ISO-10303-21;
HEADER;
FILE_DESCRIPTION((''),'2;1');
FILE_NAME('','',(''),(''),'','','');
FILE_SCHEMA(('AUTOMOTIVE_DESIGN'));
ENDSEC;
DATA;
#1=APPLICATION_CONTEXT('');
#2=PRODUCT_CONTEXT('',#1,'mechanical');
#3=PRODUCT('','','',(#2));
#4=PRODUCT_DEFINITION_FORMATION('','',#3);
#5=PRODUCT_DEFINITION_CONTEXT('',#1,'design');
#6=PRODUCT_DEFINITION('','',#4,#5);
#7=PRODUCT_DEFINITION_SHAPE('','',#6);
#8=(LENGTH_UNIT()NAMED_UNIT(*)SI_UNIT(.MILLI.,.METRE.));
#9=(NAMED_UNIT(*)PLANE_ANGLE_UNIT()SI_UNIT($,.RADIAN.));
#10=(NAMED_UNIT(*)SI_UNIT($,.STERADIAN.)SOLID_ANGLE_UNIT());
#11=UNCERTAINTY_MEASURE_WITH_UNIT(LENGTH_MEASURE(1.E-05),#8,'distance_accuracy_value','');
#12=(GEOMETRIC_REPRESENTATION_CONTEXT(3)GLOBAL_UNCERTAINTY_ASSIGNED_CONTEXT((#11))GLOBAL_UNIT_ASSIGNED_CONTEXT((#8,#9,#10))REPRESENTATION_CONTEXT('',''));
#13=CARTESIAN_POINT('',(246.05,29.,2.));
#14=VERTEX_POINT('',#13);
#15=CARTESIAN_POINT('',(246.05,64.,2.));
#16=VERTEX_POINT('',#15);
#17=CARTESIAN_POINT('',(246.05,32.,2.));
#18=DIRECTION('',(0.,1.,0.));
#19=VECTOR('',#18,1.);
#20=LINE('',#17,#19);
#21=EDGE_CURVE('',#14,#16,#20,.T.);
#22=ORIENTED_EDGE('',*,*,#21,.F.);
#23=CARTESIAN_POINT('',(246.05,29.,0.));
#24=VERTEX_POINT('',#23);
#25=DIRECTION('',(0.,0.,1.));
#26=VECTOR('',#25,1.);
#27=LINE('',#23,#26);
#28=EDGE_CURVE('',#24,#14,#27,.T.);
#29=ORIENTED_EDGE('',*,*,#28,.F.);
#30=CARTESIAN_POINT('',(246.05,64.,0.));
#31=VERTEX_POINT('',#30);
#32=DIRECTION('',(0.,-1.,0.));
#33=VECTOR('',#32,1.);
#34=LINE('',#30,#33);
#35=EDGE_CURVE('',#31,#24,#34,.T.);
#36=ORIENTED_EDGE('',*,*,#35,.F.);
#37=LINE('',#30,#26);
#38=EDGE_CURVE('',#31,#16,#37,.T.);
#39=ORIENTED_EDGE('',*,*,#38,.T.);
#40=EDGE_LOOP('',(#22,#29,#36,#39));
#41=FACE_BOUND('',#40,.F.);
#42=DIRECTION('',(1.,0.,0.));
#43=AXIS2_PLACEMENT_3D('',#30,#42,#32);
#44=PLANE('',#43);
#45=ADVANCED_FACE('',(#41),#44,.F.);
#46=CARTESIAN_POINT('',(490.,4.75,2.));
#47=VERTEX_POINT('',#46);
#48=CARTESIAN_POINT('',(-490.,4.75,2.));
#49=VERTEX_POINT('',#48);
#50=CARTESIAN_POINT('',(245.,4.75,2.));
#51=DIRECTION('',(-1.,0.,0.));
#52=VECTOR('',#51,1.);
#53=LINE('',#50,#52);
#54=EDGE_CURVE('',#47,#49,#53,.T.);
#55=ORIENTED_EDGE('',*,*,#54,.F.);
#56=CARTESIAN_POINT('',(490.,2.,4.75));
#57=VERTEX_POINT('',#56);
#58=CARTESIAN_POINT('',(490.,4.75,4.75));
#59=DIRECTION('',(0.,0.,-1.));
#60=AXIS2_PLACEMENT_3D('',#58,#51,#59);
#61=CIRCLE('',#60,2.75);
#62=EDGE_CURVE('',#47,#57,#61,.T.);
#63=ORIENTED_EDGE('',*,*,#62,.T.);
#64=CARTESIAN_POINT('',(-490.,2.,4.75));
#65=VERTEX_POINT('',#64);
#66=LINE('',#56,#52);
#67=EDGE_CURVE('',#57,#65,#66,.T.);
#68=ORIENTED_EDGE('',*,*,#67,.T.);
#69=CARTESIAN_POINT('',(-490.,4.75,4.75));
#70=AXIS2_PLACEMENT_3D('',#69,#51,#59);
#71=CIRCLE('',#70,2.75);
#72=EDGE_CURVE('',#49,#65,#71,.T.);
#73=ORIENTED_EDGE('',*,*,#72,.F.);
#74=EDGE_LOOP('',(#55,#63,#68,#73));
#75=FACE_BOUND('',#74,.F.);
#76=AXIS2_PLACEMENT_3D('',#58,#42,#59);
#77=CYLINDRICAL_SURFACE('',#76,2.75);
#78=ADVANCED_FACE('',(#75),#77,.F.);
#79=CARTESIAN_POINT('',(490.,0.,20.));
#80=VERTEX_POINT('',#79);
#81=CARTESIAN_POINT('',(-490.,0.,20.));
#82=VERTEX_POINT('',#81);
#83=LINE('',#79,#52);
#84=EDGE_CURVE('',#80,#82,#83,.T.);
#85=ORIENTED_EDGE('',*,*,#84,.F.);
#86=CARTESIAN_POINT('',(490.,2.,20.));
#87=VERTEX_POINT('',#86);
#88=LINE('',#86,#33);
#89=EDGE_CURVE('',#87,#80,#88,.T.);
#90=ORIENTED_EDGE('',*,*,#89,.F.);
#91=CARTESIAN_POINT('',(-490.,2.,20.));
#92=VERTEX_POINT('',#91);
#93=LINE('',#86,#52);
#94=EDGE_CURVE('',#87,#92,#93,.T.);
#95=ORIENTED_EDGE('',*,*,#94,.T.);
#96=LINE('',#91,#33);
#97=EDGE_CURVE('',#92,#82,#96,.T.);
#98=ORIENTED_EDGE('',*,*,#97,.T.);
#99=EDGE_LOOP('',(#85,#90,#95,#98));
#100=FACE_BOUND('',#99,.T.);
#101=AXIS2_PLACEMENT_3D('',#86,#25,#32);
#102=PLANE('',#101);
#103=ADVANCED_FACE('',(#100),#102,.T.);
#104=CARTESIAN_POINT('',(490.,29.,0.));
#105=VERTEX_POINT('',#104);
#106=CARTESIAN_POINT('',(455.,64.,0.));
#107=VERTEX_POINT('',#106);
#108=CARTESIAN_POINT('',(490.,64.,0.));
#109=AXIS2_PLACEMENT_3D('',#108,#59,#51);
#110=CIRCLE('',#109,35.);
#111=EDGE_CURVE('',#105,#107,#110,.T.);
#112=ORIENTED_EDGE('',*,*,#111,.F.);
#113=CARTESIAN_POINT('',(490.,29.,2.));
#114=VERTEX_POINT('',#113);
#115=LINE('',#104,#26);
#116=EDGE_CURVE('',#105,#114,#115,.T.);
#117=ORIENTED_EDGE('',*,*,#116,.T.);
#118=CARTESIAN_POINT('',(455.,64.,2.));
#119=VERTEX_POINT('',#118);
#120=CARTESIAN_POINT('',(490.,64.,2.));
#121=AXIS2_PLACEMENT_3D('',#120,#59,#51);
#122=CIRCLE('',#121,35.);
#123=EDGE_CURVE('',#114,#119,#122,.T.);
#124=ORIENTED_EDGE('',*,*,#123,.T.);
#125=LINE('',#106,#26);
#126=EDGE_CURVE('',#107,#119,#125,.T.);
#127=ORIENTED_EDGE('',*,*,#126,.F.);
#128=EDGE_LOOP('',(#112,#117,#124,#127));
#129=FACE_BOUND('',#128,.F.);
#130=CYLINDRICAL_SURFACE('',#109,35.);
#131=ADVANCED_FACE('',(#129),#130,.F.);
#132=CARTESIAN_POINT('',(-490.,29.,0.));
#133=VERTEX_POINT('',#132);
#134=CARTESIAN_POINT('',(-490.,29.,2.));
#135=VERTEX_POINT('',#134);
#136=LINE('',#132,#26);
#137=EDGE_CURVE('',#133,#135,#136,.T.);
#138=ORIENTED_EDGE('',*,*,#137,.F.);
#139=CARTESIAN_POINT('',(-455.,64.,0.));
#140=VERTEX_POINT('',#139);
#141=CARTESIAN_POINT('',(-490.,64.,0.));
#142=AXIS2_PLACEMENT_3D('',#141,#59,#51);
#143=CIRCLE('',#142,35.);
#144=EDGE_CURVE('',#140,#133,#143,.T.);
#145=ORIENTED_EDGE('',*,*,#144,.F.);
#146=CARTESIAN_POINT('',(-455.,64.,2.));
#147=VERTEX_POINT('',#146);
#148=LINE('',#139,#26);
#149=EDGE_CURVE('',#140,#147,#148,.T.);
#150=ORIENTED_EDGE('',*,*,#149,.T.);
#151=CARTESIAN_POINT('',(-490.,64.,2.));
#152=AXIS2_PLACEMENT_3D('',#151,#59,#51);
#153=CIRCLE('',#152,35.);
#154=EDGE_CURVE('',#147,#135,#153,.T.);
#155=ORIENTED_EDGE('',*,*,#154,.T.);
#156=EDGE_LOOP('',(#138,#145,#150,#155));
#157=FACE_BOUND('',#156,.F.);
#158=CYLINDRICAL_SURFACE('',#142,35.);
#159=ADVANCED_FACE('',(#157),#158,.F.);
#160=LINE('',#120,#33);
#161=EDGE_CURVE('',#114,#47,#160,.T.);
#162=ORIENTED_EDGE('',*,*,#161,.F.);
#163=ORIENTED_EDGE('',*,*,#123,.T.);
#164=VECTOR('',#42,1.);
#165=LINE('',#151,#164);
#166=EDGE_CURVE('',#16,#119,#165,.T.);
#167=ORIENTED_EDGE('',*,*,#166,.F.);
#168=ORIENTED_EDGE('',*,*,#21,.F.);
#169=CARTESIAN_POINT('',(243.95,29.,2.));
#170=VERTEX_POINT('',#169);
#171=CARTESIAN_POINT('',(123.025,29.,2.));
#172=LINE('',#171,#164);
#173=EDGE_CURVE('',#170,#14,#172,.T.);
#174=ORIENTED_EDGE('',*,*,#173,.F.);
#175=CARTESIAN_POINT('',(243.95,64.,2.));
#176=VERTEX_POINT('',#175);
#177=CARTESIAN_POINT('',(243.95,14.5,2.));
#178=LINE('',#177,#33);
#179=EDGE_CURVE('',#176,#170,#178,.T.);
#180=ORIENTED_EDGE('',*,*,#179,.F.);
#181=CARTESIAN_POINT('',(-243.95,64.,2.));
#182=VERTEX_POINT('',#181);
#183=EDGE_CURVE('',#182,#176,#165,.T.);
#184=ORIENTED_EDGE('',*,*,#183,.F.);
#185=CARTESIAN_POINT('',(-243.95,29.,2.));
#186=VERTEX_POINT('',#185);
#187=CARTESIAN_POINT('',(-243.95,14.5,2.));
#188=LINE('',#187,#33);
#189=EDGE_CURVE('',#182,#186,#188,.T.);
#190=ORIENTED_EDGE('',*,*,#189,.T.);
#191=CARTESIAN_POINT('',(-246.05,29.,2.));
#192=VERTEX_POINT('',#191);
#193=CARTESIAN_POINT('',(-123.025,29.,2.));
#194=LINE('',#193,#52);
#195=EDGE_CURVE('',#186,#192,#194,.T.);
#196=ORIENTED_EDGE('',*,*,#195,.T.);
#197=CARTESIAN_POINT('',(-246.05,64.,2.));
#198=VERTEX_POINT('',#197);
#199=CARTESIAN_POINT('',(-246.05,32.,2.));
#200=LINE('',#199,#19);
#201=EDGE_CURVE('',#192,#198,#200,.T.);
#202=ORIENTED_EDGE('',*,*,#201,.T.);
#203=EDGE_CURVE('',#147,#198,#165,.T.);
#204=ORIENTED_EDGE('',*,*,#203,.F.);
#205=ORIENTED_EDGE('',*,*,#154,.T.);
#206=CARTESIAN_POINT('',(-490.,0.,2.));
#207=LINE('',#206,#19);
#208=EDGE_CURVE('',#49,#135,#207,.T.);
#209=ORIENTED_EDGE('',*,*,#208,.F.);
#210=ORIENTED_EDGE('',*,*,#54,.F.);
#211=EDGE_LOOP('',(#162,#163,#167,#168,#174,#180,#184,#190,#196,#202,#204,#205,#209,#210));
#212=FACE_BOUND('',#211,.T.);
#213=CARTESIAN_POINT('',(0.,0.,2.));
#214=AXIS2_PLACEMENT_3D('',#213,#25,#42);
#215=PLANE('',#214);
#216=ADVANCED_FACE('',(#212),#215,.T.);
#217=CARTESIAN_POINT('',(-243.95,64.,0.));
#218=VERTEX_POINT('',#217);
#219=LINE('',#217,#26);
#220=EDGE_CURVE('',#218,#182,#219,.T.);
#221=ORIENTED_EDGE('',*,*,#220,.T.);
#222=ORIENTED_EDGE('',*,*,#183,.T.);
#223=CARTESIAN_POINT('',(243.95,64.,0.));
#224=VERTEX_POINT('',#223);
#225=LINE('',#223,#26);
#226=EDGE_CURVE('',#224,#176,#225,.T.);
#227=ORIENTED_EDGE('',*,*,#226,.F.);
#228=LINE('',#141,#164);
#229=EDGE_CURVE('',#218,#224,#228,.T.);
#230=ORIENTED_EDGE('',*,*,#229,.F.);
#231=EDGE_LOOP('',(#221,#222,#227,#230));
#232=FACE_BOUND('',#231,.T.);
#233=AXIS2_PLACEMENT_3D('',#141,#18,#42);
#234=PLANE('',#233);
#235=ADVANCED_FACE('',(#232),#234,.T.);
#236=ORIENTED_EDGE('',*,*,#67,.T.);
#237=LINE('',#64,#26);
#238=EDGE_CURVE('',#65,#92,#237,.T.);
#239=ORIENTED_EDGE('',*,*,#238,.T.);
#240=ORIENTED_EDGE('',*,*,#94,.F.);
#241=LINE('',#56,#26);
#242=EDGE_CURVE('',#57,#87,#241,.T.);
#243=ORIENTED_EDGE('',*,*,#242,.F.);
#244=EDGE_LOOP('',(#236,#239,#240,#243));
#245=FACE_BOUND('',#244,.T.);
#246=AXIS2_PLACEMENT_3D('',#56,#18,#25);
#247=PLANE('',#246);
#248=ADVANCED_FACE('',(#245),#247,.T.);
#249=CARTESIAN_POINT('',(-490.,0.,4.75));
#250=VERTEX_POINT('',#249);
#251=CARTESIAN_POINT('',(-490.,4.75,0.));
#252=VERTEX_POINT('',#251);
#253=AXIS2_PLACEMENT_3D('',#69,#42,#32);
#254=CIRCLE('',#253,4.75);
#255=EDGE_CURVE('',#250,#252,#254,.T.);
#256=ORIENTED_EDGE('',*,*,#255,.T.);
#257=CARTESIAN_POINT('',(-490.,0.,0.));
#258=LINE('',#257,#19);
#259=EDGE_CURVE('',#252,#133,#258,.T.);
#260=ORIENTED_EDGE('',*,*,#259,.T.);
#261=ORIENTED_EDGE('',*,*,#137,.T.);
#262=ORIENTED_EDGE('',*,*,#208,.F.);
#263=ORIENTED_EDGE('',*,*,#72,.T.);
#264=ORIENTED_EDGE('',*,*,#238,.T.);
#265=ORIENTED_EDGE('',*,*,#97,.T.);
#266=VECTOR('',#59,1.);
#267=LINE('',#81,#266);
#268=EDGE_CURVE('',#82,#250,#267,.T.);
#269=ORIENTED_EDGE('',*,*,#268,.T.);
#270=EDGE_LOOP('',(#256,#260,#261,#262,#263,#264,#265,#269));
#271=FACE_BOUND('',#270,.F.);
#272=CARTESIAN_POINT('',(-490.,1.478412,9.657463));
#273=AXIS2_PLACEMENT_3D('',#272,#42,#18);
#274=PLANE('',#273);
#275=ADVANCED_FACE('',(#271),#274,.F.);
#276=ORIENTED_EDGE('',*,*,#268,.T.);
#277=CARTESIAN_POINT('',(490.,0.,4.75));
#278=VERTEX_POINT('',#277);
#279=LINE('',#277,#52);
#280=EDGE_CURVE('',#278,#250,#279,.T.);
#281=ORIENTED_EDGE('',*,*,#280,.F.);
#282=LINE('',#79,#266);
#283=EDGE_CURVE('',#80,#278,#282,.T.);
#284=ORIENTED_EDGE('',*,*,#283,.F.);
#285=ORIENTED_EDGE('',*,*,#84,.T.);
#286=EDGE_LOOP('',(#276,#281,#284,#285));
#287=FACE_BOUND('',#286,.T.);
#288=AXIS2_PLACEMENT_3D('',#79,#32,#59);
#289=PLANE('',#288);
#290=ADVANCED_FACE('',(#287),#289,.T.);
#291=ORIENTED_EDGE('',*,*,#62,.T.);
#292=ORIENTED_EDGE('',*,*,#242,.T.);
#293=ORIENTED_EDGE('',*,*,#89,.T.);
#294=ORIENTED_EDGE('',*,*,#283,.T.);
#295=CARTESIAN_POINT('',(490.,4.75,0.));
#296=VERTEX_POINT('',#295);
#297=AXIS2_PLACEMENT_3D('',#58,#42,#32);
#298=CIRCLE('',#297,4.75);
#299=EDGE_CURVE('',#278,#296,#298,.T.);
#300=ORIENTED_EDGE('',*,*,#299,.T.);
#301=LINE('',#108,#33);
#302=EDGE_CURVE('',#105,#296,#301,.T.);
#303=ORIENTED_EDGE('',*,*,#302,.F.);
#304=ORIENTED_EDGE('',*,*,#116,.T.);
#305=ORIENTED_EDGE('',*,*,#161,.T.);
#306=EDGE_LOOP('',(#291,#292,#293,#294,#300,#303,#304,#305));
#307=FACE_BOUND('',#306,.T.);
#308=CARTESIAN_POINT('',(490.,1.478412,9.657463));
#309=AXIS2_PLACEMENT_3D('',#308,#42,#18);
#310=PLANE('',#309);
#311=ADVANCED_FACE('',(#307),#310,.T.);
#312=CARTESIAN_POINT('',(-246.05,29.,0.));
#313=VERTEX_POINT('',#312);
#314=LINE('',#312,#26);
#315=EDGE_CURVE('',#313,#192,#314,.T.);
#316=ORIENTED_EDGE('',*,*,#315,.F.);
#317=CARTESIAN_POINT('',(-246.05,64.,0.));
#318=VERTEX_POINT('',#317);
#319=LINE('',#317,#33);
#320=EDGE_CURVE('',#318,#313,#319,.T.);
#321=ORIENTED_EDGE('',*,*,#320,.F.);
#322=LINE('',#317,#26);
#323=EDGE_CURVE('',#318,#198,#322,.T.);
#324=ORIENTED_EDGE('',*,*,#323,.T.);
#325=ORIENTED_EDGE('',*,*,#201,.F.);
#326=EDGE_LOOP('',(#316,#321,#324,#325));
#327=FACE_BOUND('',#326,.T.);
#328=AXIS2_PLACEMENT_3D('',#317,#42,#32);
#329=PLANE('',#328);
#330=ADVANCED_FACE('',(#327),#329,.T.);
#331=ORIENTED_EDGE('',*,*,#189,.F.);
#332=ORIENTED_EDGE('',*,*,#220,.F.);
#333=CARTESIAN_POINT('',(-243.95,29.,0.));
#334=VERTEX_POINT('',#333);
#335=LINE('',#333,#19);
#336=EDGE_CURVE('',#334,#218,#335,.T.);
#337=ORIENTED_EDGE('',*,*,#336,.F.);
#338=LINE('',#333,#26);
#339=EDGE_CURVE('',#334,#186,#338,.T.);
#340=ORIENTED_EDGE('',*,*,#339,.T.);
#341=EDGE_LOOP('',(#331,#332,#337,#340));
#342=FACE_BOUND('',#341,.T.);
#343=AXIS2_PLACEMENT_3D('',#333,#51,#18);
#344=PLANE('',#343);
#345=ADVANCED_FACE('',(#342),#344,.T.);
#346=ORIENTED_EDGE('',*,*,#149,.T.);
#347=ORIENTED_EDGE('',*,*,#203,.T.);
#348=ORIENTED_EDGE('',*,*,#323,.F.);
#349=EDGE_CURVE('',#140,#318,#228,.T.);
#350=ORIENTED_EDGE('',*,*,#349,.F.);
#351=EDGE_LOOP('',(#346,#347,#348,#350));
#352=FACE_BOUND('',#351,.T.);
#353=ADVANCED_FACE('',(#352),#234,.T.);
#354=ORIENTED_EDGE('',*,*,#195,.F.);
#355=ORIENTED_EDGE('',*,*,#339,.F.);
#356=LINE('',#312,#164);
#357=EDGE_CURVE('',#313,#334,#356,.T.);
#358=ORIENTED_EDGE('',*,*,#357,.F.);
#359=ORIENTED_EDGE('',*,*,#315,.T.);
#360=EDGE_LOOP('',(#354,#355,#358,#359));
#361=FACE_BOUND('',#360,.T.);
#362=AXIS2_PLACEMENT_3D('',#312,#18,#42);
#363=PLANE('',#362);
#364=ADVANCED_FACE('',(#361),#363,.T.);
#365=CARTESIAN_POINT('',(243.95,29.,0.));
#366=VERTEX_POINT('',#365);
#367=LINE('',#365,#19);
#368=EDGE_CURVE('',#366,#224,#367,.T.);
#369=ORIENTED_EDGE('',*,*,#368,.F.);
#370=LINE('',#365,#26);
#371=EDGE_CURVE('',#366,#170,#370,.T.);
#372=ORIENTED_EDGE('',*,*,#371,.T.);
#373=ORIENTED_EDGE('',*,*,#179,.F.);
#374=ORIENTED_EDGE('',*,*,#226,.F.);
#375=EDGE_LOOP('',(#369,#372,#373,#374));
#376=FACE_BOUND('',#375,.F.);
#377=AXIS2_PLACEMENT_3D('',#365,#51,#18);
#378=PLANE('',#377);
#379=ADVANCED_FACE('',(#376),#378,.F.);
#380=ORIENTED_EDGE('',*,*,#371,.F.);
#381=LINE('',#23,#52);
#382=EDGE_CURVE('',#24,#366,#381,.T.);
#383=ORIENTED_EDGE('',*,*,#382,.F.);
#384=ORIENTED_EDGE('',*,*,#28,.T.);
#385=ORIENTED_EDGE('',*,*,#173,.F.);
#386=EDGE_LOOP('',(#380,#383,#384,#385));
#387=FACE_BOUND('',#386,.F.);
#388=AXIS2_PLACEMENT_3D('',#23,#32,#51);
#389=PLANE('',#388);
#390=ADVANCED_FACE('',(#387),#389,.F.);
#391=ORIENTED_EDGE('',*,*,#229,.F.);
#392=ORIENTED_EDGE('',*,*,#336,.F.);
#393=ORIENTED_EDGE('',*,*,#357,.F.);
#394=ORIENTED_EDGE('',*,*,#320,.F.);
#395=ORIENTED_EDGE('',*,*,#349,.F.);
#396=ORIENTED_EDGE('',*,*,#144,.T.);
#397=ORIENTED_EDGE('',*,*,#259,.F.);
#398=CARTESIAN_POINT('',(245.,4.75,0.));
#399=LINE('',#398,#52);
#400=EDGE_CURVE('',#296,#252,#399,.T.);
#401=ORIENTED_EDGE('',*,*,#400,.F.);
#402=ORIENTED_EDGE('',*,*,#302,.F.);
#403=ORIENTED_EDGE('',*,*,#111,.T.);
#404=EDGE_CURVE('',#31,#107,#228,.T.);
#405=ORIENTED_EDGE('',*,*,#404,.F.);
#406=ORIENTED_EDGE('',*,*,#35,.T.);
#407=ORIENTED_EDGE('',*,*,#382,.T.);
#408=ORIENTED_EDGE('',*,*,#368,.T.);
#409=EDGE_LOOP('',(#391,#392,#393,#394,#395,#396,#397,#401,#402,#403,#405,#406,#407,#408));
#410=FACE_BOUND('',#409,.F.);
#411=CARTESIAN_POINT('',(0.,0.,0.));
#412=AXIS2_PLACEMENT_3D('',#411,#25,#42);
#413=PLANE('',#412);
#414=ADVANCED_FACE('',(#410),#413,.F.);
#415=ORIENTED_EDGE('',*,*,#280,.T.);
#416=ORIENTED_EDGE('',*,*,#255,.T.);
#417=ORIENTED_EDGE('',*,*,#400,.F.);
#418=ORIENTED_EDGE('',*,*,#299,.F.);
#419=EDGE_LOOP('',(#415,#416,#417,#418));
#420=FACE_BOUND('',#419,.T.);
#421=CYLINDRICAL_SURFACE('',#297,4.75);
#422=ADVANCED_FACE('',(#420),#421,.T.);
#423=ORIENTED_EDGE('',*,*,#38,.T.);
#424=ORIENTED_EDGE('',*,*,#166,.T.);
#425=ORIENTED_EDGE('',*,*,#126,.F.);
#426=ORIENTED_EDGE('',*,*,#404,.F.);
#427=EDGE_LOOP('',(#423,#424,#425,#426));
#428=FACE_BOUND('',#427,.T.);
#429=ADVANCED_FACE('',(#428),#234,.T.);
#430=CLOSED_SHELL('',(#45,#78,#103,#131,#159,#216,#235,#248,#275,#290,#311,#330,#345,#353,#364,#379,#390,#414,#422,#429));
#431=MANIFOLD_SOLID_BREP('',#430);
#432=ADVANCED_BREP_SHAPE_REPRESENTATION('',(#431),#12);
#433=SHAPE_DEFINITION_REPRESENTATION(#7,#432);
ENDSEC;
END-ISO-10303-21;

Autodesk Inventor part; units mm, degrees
ref_plane "YZ Plane" through (0, 0, 0) normal (1, 0, 0) x (0, 1, 0)
ref_plane "XZ Plane" through (0, 0, 0) normal (0, 1, 0) x (-1, 0, 0)
ref_plane "XY Plane" through (0, 0, 0) normal (0, 0, 1) x (1, 0, 0)
sketch "Sketch1" plane through (0, 0, 0) normal (0, 0, 1) x (1, 0, 0)
  line L0 (-490, 64) -> (490, 64)
  line L1 (490, 64) -> (490, 0)
  line L2 (490, 0) -> (-490, 0)
  line L3 (-490, 0) -> (-490, 64)
  point P0 (0, 0)
  point P1 (0, 0)
  dimension "d0" = 980
  dimension "d1" = 64
extrude "Plate1" add sketch "Sketch1" along normal blind 2
sketch "Sketch2" plane through (490, 2, 0) normal (0, -1, 0) x (1, 0, 0)
  line L0 (-980, 0) -> (0, 0)
  line L1 (0, 0) -> (0, 20)
  line L2 (0, 20) -> (-980, 20)
  line L3 (-980, 20) -> (-980, 0)
edge flange "Flange1" height 20 angle 90 thickness 2 bend radius 2.75 thickness toward (0, -1, 0) relief round relief width 2 relief depth 1 edges at (0, 0, 2) wall of the first edge with corners at (-490, 2, 0) (490, 2, 0) (490, 2, 20) (-490, 2, 20)
bend "Bend1"
corner "Corner1"
sketch "Sketch5" plane through (0, 0, 0) normal (0, 0, -1) x (-1, 0, 0)
  line L0 (490, 64) -> (-490, 64) projected
  line L1 (490, 0) -> (-490, 0) projected
  circle A0 centre (0, 64) radius 35
  line L2 (243.95, 64) -> (246.05, 64)
  line L3 (246.05, 64) -> (246.05, 29)
  line L4 (246.05, 29) -> (243.95, 29)
  line L5 (243.95, 29) -> (243.95, 64)
  line L6 (-243.95, 64) -> (-246.05, 64)
  line L7 (-246.05, 64) -> (-246.05, 29)
  line L8 (-246.05, 29) -> (-243.95, 29)
  line L9 (-243.95, 29) -> (-243.95, 64)
  line L10 (0, 64) -> (0, 0) construction
  line L11 (-490, 0) -> (-490, 64)
  line L12 (490, 0) -> (490, 64)
  circle A1 centre (-490, 64) radius 35
  circle A2 centre (490, 64) radius 35
  point P0 (0, 0)
  point P1 (245, 29)
  point P2 (-245, 29)
  point P3 (246.05, 64)
  point P4 (-35, 64)
  point P5 (35, 64)
  point P6 (-246.05, 64)
  point P7 (455, 64)
  point P8 (490, 29)
  point P9 (-490, 29)
  point P10 (-455, 64)
  dimension "d45" = 70
  dimension "d48" = 2.1
  dimension "d49" = 490
  dimension "d51" = 29
  dimension "d52" = 35
extrude "Extrusion1" cut sketch "Sketch5" against normal through all contours L3 L4 L5 L0 | L0 L12 A2 | L9 L8 L7 L0 | L11 L0 A1 picked at (487.4039, 40.9592) picked at (-466.9592, 61.4039)
sketch "Sketch9" plane through (0, 0, 2) normal (0, 0, 1) x (1, 0, 0)
  line L0 (467.0539, 27.7998) -> (467.0539, 15.7998) construction
  line L1 (467.0539, 15.7998) -> (267.0539, 15.7998) construction
  line L2 (267.0539, 15.7998) -> (267.0539, 27.7998) construction
  line L3 (267.0539, 27.7998) -> (467.0539, 27.7998) construction
  line L4 (-490, 64) -> (490, 64) projected
  point P0 (0, 0)
  point P1 (1.05, 68)
  point P2 (490, 64)
  point P3 (-490, 64)
  dimension "d40" = 200
  dimension "d41" = 12
mark "Mark2"
equation "\"d2\" = Thickness"
equation "\"d3\" = BendReliefWidth"
equation "\"d4\" = BendReliefDepth"
equation "\"d5\" = MinimumRemnant"
equation "\"d6\" = TransitionRadius"
equation "\"d9\" = BendRadius"
equation "\"d10\" = CornerReliefSize"
equation "\"d11\" = GapSize"
equation "\"d12\" = JacobiRadiusSize"
equation "\"BendReliefWidth\" = Thickness"
equation "\"BendReliefDepth\" = 0.5 * Thickness"
equation "\"CornerReliefSize\" = 4 * Thickness"
equation "\"MinimumRemnant\" = 2 * Thickness"
equation "\"TransitionRadius\" = BendRadius"
equation "\"JacobiRadiusSize\" = BendRadius"
equation "\"GapSize\" = Thickness"
equation "\"Thickness\" = 2"
equation "\"BendRadius\" = 2.75"
properties part number "MSC 309 stringer BOARD  ####" material "Stainless Steel"
